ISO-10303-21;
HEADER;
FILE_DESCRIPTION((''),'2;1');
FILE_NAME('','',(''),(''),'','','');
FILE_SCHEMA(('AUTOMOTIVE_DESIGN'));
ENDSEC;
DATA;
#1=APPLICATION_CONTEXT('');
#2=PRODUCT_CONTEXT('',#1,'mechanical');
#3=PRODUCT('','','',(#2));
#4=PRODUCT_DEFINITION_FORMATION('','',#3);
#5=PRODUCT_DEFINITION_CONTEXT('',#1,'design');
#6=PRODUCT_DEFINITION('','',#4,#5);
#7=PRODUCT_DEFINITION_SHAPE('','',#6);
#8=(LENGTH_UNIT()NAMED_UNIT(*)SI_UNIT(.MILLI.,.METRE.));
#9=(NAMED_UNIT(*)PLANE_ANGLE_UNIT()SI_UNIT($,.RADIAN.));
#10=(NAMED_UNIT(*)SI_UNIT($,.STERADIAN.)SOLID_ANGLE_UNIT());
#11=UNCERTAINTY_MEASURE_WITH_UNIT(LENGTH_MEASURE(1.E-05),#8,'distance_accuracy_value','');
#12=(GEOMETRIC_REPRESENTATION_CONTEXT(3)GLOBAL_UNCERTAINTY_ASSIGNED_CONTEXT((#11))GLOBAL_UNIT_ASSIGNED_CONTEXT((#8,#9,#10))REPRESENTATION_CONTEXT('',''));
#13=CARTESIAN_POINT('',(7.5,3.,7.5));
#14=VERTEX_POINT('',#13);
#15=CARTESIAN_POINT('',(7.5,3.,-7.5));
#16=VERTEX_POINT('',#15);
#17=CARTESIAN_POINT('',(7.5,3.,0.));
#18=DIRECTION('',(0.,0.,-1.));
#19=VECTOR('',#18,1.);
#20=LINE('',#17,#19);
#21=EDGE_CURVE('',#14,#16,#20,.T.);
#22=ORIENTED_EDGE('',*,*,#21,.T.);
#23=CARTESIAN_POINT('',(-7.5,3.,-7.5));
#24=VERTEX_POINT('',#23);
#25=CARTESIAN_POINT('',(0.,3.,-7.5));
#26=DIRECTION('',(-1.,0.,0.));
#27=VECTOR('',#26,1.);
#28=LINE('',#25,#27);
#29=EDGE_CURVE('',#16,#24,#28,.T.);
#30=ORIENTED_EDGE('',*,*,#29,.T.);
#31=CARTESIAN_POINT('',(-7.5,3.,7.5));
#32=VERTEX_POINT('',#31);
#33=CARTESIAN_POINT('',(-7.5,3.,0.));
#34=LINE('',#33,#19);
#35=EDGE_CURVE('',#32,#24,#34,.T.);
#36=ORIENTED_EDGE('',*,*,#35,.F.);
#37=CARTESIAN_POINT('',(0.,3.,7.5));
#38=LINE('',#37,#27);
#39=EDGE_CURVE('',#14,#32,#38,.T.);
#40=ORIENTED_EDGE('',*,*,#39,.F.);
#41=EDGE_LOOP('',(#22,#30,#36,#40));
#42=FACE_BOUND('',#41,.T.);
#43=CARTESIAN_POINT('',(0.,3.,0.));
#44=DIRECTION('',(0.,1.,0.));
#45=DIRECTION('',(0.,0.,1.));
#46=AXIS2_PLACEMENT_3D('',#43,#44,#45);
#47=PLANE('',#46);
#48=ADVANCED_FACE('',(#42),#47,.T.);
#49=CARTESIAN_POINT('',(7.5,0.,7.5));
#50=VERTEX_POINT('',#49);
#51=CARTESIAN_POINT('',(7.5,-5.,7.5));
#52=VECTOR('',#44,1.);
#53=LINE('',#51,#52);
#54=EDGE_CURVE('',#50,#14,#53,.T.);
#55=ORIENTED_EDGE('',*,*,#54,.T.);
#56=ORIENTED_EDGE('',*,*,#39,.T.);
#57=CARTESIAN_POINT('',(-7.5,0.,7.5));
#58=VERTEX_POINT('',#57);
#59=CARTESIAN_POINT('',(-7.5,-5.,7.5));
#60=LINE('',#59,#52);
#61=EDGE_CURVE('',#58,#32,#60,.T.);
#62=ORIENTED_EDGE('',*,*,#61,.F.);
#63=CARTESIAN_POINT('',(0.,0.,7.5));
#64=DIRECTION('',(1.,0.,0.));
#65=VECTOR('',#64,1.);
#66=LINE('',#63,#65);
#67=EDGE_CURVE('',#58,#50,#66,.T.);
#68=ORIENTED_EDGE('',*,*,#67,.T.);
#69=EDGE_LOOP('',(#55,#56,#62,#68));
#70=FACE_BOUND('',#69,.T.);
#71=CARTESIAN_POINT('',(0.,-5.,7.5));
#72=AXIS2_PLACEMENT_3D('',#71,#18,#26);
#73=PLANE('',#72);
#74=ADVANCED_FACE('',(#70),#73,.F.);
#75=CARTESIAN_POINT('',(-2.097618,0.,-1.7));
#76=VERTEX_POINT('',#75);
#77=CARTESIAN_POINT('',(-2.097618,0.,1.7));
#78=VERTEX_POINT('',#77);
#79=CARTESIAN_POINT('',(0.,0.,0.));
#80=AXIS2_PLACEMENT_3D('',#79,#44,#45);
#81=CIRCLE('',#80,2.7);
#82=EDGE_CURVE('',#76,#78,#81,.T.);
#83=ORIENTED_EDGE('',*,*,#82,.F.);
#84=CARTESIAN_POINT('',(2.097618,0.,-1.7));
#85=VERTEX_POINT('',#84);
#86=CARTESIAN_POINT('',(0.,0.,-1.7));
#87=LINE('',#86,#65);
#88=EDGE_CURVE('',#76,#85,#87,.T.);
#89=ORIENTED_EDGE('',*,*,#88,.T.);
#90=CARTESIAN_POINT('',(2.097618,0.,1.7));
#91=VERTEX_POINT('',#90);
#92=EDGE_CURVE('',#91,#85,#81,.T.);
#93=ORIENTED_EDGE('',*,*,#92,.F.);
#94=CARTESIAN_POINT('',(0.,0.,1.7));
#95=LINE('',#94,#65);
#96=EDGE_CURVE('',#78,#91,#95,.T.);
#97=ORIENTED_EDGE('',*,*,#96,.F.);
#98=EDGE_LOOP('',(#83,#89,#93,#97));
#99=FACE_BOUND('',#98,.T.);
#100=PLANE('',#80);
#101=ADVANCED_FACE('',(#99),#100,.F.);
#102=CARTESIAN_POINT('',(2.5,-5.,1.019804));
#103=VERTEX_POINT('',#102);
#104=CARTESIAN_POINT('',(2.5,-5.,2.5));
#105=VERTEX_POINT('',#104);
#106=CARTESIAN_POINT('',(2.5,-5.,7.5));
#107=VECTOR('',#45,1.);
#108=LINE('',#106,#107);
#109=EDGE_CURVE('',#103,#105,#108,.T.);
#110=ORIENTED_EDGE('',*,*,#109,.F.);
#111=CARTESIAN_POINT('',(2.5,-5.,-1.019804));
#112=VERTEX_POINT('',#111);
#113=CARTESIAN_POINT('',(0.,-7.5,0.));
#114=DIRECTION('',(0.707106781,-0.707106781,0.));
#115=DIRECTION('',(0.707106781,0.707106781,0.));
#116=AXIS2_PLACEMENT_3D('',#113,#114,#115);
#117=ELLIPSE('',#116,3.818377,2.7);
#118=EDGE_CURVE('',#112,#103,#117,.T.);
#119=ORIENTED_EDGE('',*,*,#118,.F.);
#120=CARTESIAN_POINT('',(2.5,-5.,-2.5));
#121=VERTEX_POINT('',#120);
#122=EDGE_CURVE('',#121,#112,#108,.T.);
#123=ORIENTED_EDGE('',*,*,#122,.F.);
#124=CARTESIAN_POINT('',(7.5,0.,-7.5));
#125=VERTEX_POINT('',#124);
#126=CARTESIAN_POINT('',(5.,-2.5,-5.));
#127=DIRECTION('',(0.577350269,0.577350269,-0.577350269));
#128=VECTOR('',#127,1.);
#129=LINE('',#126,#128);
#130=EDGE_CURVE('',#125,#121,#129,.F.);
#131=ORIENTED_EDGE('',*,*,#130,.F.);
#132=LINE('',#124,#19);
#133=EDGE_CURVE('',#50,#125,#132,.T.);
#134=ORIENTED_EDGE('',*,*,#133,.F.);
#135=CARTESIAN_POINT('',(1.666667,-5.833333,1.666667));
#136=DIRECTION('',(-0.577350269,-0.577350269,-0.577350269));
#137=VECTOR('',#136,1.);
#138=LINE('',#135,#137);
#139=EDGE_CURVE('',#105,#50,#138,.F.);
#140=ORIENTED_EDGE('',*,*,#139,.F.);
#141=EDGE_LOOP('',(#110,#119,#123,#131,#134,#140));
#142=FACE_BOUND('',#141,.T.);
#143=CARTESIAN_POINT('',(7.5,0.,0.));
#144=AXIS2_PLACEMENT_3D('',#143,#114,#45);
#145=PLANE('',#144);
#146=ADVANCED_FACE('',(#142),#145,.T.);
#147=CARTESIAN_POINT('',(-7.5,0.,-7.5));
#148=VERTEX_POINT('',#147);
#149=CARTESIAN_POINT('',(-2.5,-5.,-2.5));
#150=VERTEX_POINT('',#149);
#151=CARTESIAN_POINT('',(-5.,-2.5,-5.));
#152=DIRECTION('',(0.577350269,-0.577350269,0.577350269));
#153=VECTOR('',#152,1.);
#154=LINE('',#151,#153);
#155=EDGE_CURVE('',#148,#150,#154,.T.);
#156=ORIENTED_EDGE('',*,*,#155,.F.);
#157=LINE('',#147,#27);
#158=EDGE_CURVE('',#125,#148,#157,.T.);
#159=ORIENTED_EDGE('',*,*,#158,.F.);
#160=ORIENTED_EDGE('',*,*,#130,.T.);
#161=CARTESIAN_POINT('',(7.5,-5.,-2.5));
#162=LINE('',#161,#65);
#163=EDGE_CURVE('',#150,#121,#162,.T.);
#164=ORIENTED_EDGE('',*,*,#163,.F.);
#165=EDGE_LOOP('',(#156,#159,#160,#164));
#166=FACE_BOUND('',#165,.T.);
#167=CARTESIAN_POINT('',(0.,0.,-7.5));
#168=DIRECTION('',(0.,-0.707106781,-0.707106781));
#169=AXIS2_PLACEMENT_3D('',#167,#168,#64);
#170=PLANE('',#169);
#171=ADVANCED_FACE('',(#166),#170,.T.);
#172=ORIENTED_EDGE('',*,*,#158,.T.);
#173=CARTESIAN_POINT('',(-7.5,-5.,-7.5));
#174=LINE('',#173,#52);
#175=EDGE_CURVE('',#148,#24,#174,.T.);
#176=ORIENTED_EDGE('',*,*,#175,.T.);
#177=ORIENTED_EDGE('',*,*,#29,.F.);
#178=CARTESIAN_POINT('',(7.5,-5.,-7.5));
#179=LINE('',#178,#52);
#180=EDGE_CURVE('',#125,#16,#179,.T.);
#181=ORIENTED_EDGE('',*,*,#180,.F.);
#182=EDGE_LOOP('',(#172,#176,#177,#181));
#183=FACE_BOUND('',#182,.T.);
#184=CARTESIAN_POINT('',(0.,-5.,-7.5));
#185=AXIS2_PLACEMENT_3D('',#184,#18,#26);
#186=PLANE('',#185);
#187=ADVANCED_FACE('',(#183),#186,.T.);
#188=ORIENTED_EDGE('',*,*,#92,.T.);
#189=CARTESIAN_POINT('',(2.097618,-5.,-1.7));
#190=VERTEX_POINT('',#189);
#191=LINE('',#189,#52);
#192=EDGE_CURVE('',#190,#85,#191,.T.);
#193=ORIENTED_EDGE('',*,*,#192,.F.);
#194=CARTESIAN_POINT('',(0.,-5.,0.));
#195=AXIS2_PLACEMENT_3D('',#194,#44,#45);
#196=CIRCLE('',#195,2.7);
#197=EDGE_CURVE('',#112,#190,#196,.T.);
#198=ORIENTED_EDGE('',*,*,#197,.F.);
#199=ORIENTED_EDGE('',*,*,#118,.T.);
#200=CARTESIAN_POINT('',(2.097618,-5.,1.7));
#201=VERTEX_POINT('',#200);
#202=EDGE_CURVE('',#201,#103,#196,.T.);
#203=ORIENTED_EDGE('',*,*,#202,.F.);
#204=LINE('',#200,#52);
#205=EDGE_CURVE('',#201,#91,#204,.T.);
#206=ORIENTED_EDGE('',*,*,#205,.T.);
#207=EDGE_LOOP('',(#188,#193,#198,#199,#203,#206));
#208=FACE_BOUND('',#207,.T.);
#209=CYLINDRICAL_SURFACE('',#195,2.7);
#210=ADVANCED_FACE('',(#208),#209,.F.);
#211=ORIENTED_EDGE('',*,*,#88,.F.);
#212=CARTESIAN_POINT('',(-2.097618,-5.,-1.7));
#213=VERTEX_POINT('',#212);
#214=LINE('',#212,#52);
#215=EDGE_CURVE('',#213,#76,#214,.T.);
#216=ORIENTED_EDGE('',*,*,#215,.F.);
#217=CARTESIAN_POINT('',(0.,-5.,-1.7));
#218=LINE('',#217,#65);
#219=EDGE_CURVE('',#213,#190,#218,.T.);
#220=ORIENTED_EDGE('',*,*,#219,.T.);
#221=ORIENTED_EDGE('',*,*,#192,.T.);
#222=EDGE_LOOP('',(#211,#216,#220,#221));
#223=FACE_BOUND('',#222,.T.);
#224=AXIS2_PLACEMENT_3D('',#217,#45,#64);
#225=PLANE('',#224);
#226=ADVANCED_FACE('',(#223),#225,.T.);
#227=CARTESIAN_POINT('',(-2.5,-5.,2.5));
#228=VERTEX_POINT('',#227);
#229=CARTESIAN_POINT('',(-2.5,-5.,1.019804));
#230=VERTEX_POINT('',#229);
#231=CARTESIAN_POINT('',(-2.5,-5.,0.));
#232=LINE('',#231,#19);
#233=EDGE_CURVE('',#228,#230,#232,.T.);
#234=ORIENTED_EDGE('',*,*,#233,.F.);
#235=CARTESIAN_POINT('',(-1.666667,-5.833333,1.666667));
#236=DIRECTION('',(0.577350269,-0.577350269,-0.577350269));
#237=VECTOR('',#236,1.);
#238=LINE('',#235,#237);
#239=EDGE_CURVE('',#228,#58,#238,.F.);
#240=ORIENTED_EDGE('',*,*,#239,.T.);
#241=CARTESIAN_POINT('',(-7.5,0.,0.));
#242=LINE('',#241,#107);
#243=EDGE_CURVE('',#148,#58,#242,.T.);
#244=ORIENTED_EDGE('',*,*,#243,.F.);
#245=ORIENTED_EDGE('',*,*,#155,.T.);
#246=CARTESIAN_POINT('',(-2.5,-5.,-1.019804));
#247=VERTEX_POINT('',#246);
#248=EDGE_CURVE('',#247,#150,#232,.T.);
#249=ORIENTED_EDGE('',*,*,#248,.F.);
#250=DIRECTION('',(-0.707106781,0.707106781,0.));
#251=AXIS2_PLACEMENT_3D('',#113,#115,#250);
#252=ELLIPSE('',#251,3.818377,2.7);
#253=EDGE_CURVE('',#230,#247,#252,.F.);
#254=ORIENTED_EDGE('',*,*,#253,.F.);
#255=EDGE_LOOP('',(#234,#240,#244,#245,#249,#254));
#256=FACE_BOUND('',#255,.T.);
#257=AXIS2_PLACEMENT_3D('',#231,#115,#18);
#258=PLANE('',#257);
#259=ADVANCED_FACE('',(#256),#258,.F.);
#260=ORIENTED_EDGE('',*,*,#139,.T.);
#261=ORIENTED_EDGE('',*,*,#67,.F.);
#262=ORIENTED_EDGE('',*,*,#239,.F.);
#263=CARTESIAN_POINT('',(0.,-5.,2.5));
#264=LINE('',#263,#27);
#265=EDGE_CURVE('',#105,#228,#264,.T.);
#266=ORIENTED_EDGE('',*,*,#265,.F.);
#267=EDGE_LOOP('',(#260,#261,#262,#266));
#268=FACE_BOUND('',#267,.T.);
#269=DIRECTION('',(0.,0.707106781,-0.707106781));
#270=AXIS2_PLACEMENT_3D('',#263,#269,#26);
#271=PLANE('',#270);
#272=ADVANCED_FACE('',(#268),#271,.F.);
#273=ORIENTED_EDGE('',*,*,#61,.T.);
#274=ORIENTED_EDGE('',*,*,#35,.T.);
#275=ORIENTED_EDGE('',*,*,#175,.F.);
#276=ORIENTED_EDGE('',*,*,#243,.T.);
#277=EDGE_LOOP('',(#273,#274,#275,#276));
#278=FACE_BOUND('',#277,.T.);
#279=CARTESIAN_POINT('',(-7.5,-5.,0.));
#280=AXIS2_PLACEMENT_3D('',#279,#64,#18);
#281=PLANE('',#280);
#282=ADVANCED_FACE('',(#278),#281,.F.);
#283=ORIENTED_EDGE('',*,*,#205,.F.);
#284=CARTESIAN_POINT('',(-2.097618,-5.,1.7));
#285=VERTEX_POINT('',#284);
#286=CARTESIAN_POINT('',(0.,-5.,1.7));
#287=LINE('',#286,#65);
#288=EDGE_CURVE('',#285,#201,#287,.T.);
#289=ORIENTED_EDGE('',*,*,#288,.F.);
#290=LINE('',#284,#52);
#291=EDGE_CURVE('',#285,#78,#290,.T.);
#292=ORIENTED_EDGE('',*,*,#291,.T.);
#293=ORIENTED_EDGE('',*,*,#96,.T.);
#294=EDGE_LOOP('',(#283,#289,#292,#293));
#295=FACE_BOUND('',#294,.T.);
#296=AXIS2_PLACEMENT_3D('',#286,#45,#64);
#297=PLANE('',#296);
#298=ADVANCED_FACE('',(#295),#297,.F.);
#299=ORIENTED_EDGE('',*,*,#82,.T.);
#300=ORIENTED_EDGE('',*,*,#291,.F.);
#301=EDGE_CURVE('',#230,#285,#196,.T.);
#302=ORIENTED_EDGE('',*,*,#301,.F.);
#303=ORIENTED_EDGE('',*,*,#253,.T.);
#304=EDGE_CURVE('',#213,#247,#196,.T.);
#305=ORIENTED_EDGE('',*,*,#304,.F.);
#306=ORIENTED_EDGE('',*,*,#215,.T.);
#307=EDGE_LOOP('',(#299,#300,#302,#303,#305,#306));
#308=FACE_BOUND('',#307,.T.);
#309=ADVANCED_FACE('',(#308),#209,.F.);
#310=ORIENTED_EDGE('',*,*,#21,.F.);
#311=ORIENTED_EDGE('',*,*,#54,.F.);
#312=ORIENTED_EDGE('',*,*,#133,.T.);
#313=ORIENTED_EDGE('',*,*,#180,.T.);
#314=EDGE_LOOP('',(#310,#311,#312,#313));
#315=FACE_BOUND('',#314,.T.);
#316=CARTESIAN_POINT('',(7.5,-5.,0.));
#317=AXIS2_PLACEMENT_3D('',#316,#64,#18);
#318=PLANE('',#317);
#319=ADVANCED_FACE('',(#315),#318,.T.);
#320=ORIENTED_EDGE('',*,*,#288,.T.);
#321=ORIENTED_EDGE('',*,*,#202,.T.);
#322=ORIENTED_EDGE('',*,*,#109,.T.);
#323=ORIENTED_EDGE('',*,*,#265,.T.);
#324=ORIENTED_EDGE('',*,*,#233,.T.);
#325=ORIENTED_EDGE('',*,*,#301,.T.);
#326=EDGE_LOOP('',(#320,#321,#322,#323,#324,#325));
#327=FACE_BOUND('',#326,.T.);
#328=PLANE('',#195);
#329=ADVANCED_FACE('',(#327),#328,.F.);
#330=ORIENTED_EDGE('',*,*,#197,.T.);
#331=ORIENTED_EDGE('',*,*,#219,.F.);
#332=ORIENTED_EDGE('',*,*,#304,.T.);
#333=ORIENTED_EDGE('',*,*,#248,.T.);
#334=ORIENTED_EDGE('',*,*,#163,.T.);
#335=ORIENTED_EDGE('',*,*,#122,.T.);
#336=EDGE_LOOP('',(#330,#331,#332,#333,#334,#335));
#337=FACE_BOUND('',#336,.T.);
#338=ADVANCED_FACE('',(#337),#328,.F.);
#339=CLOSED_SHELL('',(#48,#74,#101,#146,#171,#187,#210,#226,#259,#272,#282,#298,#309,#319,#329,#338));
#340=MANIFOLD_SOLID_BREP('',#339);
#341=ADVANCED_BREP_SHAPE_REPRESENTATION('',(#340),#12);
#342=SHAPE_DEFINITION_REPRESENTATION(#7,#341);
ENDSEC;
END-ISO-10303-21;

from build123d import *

# Parameters (mm, degrees)
SKETCH1_W           = 15
SKETCH1_H           = 15
SKETCH1_R           = 2.7
BOSS_EXTRUDE1_DEPTH = 5
BOSS_EXTRUDE2_START = 3
SKETCH1_3_W         = 15
SKETCH1_3_H         = 15
SKETCH1_3_R         = 2.7
BOSS_EXTRUDE2_DEPTH = 3
CHAMFER1_SIZE       = 5


with BuildPart() as part:
    # Sketch1 → Boss-Extrude1 (new body)
    # profile 1 of 3: a face of its own
    with BuildSketch(Plane(origin=(0, 0, 0), x_dir=(1, 0, 0), z_dir=(0, 1, 0))):
        Rectangle(SKETCH1_W, SKETCH1_H)
        Circle(SKETCH1_R, mode=Mode.SUBTRACT)
    # profile 2 of 3: a face of its own
    with BuildSketch(Plane(origin=(0, 0, 0), x_dir=(1, 0, 0), z_dir=(0, 1, 0))):
        with BuildLine():
            ThreePointArc((2.097617696, 1.7), (0, 2.7), (-2.097617696, 1.7))
            Line((-2.097617696, 1.7), (2.097617696, 1.7))
        make_face()
    # profile 3 of 3: a face of its own
    with BuildSketch(Plane(origin=(0, 0, 0), x_dir=(1, 0, 0), z_dir=(0, 1, 0))):
        with BuildLine():
            Line((2.097617696, -1.7), (-2.097617696, -1.7))
            ThreePointArc((-2.097617696, -1.7), (0, -2.7), (2.097617696, -1.7))
        make_face()
    extrude(amount=-BOSS_EXTRUDE1_DEPTH)

    # Sketch1<3> → Boss-Extrude2 (add)
    # profile 1 of 4: a face of its own
    with BuildSketch(Plane(origin=(0, 0, 0), x_dir=(1, 0, 0), z_dir=(0, 1, 0)).offset(BOSS_EXTRUDE2_START)):
        Rectangle(SKETCH1_3_W, SKETCH1_3_H)
        Circle(SKETCH1_3_R, mode=Mode.SUBTRACT)
    # profile 2 of 4: a face of its own
    with BuildSketch(Plane(origin=(0, 0, 0), x_dir=(1, 0, 0), z_dir=(0, 1, 0)).offset(BOSS_EXTRUDE2_START)):
        with BuildLine():
            ThreePointArc((2.097617696, 1.7), (0, 2.7), (-2.097617696, 1.7))
            Line((-2.097617696, 1.7), (2.097617696, 1.7))
        make_face()
    # profile 3 of 4: a face of its own
    with BuildSketch(Plane(origin=(0, 0, 0), x_dir=(1, 0, 0), z_dir=(0, 1, 0)).offset(BOSS_EXTRUDE2_START)):
        with BuildLine():
            Line((2.097617696, 1.7), (-2.097617696, 1.7))
            ThreePointArc((-2.097617696, 1.7), (-2.7, 0), (-2.097617696, -1.7))
            Line((-2.097617696, -1.7), (2.097617696, -1.7))
            ThreePointArc((2.097617696, -1.7), (2.54495263, -0.901784958), (2.7, 0))
            ThreePointArc((2.7, 0), (2.54495263, 0.901784958), (2.097617696, 1.7))
        make_face()
    # profile 4 of 4: a face of its own
    with BuildSketch(Plane(origin=(0, 0, 0), x_dir=(1, 0, 0), z_dir=(0, 1, 0)).offset(BOSS_EXTRUDE2_START)):
        with BuildLine():
            Line((2.097617696, -1.7), (-2.097617696, -1.7))
            ThreePointArc((-2.097617696, -1.7), (0, -2.7), (2.097617696, -1.7))
        make_face()
    extrude(amount=-BOSS_EXTRUDE2_DEPTH)

    # Chamfer1
    # the kernel refuses this chamfer: 5 mm, written as the material it takes off along each edge
    with BuildSketch(Plane(origin=(-7.5, -5, 20.35841494), x_dir=(-0.027495876610586317, 0.9996219169112968, 0), z_dir=(0, 0, -1)), Plane(origin=(7.5, -5, -20.35841494), x_dir=(0.027495876610586317, 0.9996219169112968, 0), z_dir=(0, 0, 1)), Plane(origin=(-20.35841494, -5, -7.5), x_dir=(0, 0.9996219169112968, -0.027495876610586317), z_dir=(1, 0, 0))) as chamfer1_piece_1:
        Polygon((CHAMFER1_SIZE * 0.999621916911, CHAMFER1_SIZE * 0.0274958766106), (-CHAMFER1_SIZE * 0.0274958766106, CHAMFER1_SIZE * 0.999621916911), (0, 0), align=None)
    extrude(amount=40.71682988, mode=Mode.SUBTRACT)
    with BuildSketch(Plane(origin=(20.35841494, -5, 7.5), x_dir=(0, -0.027495876610586317, -0.9996219169112968), z_dir=(-1, 0, 0))) as chamfer1_piece_2:
        Polygon((CHAMFER1_SIZE * 0.999621916911, -CHAMFER1_SIZE * 0.0274958766106), (-CHAMFER1_SIZE * 0.0274958766106, -CHAMFER1_SIZE * 0.999621916911), (0, 0), align=None)
    extrude(amount=40.71682988, mode=Mode.SUBTRACT)


solid = part.part
